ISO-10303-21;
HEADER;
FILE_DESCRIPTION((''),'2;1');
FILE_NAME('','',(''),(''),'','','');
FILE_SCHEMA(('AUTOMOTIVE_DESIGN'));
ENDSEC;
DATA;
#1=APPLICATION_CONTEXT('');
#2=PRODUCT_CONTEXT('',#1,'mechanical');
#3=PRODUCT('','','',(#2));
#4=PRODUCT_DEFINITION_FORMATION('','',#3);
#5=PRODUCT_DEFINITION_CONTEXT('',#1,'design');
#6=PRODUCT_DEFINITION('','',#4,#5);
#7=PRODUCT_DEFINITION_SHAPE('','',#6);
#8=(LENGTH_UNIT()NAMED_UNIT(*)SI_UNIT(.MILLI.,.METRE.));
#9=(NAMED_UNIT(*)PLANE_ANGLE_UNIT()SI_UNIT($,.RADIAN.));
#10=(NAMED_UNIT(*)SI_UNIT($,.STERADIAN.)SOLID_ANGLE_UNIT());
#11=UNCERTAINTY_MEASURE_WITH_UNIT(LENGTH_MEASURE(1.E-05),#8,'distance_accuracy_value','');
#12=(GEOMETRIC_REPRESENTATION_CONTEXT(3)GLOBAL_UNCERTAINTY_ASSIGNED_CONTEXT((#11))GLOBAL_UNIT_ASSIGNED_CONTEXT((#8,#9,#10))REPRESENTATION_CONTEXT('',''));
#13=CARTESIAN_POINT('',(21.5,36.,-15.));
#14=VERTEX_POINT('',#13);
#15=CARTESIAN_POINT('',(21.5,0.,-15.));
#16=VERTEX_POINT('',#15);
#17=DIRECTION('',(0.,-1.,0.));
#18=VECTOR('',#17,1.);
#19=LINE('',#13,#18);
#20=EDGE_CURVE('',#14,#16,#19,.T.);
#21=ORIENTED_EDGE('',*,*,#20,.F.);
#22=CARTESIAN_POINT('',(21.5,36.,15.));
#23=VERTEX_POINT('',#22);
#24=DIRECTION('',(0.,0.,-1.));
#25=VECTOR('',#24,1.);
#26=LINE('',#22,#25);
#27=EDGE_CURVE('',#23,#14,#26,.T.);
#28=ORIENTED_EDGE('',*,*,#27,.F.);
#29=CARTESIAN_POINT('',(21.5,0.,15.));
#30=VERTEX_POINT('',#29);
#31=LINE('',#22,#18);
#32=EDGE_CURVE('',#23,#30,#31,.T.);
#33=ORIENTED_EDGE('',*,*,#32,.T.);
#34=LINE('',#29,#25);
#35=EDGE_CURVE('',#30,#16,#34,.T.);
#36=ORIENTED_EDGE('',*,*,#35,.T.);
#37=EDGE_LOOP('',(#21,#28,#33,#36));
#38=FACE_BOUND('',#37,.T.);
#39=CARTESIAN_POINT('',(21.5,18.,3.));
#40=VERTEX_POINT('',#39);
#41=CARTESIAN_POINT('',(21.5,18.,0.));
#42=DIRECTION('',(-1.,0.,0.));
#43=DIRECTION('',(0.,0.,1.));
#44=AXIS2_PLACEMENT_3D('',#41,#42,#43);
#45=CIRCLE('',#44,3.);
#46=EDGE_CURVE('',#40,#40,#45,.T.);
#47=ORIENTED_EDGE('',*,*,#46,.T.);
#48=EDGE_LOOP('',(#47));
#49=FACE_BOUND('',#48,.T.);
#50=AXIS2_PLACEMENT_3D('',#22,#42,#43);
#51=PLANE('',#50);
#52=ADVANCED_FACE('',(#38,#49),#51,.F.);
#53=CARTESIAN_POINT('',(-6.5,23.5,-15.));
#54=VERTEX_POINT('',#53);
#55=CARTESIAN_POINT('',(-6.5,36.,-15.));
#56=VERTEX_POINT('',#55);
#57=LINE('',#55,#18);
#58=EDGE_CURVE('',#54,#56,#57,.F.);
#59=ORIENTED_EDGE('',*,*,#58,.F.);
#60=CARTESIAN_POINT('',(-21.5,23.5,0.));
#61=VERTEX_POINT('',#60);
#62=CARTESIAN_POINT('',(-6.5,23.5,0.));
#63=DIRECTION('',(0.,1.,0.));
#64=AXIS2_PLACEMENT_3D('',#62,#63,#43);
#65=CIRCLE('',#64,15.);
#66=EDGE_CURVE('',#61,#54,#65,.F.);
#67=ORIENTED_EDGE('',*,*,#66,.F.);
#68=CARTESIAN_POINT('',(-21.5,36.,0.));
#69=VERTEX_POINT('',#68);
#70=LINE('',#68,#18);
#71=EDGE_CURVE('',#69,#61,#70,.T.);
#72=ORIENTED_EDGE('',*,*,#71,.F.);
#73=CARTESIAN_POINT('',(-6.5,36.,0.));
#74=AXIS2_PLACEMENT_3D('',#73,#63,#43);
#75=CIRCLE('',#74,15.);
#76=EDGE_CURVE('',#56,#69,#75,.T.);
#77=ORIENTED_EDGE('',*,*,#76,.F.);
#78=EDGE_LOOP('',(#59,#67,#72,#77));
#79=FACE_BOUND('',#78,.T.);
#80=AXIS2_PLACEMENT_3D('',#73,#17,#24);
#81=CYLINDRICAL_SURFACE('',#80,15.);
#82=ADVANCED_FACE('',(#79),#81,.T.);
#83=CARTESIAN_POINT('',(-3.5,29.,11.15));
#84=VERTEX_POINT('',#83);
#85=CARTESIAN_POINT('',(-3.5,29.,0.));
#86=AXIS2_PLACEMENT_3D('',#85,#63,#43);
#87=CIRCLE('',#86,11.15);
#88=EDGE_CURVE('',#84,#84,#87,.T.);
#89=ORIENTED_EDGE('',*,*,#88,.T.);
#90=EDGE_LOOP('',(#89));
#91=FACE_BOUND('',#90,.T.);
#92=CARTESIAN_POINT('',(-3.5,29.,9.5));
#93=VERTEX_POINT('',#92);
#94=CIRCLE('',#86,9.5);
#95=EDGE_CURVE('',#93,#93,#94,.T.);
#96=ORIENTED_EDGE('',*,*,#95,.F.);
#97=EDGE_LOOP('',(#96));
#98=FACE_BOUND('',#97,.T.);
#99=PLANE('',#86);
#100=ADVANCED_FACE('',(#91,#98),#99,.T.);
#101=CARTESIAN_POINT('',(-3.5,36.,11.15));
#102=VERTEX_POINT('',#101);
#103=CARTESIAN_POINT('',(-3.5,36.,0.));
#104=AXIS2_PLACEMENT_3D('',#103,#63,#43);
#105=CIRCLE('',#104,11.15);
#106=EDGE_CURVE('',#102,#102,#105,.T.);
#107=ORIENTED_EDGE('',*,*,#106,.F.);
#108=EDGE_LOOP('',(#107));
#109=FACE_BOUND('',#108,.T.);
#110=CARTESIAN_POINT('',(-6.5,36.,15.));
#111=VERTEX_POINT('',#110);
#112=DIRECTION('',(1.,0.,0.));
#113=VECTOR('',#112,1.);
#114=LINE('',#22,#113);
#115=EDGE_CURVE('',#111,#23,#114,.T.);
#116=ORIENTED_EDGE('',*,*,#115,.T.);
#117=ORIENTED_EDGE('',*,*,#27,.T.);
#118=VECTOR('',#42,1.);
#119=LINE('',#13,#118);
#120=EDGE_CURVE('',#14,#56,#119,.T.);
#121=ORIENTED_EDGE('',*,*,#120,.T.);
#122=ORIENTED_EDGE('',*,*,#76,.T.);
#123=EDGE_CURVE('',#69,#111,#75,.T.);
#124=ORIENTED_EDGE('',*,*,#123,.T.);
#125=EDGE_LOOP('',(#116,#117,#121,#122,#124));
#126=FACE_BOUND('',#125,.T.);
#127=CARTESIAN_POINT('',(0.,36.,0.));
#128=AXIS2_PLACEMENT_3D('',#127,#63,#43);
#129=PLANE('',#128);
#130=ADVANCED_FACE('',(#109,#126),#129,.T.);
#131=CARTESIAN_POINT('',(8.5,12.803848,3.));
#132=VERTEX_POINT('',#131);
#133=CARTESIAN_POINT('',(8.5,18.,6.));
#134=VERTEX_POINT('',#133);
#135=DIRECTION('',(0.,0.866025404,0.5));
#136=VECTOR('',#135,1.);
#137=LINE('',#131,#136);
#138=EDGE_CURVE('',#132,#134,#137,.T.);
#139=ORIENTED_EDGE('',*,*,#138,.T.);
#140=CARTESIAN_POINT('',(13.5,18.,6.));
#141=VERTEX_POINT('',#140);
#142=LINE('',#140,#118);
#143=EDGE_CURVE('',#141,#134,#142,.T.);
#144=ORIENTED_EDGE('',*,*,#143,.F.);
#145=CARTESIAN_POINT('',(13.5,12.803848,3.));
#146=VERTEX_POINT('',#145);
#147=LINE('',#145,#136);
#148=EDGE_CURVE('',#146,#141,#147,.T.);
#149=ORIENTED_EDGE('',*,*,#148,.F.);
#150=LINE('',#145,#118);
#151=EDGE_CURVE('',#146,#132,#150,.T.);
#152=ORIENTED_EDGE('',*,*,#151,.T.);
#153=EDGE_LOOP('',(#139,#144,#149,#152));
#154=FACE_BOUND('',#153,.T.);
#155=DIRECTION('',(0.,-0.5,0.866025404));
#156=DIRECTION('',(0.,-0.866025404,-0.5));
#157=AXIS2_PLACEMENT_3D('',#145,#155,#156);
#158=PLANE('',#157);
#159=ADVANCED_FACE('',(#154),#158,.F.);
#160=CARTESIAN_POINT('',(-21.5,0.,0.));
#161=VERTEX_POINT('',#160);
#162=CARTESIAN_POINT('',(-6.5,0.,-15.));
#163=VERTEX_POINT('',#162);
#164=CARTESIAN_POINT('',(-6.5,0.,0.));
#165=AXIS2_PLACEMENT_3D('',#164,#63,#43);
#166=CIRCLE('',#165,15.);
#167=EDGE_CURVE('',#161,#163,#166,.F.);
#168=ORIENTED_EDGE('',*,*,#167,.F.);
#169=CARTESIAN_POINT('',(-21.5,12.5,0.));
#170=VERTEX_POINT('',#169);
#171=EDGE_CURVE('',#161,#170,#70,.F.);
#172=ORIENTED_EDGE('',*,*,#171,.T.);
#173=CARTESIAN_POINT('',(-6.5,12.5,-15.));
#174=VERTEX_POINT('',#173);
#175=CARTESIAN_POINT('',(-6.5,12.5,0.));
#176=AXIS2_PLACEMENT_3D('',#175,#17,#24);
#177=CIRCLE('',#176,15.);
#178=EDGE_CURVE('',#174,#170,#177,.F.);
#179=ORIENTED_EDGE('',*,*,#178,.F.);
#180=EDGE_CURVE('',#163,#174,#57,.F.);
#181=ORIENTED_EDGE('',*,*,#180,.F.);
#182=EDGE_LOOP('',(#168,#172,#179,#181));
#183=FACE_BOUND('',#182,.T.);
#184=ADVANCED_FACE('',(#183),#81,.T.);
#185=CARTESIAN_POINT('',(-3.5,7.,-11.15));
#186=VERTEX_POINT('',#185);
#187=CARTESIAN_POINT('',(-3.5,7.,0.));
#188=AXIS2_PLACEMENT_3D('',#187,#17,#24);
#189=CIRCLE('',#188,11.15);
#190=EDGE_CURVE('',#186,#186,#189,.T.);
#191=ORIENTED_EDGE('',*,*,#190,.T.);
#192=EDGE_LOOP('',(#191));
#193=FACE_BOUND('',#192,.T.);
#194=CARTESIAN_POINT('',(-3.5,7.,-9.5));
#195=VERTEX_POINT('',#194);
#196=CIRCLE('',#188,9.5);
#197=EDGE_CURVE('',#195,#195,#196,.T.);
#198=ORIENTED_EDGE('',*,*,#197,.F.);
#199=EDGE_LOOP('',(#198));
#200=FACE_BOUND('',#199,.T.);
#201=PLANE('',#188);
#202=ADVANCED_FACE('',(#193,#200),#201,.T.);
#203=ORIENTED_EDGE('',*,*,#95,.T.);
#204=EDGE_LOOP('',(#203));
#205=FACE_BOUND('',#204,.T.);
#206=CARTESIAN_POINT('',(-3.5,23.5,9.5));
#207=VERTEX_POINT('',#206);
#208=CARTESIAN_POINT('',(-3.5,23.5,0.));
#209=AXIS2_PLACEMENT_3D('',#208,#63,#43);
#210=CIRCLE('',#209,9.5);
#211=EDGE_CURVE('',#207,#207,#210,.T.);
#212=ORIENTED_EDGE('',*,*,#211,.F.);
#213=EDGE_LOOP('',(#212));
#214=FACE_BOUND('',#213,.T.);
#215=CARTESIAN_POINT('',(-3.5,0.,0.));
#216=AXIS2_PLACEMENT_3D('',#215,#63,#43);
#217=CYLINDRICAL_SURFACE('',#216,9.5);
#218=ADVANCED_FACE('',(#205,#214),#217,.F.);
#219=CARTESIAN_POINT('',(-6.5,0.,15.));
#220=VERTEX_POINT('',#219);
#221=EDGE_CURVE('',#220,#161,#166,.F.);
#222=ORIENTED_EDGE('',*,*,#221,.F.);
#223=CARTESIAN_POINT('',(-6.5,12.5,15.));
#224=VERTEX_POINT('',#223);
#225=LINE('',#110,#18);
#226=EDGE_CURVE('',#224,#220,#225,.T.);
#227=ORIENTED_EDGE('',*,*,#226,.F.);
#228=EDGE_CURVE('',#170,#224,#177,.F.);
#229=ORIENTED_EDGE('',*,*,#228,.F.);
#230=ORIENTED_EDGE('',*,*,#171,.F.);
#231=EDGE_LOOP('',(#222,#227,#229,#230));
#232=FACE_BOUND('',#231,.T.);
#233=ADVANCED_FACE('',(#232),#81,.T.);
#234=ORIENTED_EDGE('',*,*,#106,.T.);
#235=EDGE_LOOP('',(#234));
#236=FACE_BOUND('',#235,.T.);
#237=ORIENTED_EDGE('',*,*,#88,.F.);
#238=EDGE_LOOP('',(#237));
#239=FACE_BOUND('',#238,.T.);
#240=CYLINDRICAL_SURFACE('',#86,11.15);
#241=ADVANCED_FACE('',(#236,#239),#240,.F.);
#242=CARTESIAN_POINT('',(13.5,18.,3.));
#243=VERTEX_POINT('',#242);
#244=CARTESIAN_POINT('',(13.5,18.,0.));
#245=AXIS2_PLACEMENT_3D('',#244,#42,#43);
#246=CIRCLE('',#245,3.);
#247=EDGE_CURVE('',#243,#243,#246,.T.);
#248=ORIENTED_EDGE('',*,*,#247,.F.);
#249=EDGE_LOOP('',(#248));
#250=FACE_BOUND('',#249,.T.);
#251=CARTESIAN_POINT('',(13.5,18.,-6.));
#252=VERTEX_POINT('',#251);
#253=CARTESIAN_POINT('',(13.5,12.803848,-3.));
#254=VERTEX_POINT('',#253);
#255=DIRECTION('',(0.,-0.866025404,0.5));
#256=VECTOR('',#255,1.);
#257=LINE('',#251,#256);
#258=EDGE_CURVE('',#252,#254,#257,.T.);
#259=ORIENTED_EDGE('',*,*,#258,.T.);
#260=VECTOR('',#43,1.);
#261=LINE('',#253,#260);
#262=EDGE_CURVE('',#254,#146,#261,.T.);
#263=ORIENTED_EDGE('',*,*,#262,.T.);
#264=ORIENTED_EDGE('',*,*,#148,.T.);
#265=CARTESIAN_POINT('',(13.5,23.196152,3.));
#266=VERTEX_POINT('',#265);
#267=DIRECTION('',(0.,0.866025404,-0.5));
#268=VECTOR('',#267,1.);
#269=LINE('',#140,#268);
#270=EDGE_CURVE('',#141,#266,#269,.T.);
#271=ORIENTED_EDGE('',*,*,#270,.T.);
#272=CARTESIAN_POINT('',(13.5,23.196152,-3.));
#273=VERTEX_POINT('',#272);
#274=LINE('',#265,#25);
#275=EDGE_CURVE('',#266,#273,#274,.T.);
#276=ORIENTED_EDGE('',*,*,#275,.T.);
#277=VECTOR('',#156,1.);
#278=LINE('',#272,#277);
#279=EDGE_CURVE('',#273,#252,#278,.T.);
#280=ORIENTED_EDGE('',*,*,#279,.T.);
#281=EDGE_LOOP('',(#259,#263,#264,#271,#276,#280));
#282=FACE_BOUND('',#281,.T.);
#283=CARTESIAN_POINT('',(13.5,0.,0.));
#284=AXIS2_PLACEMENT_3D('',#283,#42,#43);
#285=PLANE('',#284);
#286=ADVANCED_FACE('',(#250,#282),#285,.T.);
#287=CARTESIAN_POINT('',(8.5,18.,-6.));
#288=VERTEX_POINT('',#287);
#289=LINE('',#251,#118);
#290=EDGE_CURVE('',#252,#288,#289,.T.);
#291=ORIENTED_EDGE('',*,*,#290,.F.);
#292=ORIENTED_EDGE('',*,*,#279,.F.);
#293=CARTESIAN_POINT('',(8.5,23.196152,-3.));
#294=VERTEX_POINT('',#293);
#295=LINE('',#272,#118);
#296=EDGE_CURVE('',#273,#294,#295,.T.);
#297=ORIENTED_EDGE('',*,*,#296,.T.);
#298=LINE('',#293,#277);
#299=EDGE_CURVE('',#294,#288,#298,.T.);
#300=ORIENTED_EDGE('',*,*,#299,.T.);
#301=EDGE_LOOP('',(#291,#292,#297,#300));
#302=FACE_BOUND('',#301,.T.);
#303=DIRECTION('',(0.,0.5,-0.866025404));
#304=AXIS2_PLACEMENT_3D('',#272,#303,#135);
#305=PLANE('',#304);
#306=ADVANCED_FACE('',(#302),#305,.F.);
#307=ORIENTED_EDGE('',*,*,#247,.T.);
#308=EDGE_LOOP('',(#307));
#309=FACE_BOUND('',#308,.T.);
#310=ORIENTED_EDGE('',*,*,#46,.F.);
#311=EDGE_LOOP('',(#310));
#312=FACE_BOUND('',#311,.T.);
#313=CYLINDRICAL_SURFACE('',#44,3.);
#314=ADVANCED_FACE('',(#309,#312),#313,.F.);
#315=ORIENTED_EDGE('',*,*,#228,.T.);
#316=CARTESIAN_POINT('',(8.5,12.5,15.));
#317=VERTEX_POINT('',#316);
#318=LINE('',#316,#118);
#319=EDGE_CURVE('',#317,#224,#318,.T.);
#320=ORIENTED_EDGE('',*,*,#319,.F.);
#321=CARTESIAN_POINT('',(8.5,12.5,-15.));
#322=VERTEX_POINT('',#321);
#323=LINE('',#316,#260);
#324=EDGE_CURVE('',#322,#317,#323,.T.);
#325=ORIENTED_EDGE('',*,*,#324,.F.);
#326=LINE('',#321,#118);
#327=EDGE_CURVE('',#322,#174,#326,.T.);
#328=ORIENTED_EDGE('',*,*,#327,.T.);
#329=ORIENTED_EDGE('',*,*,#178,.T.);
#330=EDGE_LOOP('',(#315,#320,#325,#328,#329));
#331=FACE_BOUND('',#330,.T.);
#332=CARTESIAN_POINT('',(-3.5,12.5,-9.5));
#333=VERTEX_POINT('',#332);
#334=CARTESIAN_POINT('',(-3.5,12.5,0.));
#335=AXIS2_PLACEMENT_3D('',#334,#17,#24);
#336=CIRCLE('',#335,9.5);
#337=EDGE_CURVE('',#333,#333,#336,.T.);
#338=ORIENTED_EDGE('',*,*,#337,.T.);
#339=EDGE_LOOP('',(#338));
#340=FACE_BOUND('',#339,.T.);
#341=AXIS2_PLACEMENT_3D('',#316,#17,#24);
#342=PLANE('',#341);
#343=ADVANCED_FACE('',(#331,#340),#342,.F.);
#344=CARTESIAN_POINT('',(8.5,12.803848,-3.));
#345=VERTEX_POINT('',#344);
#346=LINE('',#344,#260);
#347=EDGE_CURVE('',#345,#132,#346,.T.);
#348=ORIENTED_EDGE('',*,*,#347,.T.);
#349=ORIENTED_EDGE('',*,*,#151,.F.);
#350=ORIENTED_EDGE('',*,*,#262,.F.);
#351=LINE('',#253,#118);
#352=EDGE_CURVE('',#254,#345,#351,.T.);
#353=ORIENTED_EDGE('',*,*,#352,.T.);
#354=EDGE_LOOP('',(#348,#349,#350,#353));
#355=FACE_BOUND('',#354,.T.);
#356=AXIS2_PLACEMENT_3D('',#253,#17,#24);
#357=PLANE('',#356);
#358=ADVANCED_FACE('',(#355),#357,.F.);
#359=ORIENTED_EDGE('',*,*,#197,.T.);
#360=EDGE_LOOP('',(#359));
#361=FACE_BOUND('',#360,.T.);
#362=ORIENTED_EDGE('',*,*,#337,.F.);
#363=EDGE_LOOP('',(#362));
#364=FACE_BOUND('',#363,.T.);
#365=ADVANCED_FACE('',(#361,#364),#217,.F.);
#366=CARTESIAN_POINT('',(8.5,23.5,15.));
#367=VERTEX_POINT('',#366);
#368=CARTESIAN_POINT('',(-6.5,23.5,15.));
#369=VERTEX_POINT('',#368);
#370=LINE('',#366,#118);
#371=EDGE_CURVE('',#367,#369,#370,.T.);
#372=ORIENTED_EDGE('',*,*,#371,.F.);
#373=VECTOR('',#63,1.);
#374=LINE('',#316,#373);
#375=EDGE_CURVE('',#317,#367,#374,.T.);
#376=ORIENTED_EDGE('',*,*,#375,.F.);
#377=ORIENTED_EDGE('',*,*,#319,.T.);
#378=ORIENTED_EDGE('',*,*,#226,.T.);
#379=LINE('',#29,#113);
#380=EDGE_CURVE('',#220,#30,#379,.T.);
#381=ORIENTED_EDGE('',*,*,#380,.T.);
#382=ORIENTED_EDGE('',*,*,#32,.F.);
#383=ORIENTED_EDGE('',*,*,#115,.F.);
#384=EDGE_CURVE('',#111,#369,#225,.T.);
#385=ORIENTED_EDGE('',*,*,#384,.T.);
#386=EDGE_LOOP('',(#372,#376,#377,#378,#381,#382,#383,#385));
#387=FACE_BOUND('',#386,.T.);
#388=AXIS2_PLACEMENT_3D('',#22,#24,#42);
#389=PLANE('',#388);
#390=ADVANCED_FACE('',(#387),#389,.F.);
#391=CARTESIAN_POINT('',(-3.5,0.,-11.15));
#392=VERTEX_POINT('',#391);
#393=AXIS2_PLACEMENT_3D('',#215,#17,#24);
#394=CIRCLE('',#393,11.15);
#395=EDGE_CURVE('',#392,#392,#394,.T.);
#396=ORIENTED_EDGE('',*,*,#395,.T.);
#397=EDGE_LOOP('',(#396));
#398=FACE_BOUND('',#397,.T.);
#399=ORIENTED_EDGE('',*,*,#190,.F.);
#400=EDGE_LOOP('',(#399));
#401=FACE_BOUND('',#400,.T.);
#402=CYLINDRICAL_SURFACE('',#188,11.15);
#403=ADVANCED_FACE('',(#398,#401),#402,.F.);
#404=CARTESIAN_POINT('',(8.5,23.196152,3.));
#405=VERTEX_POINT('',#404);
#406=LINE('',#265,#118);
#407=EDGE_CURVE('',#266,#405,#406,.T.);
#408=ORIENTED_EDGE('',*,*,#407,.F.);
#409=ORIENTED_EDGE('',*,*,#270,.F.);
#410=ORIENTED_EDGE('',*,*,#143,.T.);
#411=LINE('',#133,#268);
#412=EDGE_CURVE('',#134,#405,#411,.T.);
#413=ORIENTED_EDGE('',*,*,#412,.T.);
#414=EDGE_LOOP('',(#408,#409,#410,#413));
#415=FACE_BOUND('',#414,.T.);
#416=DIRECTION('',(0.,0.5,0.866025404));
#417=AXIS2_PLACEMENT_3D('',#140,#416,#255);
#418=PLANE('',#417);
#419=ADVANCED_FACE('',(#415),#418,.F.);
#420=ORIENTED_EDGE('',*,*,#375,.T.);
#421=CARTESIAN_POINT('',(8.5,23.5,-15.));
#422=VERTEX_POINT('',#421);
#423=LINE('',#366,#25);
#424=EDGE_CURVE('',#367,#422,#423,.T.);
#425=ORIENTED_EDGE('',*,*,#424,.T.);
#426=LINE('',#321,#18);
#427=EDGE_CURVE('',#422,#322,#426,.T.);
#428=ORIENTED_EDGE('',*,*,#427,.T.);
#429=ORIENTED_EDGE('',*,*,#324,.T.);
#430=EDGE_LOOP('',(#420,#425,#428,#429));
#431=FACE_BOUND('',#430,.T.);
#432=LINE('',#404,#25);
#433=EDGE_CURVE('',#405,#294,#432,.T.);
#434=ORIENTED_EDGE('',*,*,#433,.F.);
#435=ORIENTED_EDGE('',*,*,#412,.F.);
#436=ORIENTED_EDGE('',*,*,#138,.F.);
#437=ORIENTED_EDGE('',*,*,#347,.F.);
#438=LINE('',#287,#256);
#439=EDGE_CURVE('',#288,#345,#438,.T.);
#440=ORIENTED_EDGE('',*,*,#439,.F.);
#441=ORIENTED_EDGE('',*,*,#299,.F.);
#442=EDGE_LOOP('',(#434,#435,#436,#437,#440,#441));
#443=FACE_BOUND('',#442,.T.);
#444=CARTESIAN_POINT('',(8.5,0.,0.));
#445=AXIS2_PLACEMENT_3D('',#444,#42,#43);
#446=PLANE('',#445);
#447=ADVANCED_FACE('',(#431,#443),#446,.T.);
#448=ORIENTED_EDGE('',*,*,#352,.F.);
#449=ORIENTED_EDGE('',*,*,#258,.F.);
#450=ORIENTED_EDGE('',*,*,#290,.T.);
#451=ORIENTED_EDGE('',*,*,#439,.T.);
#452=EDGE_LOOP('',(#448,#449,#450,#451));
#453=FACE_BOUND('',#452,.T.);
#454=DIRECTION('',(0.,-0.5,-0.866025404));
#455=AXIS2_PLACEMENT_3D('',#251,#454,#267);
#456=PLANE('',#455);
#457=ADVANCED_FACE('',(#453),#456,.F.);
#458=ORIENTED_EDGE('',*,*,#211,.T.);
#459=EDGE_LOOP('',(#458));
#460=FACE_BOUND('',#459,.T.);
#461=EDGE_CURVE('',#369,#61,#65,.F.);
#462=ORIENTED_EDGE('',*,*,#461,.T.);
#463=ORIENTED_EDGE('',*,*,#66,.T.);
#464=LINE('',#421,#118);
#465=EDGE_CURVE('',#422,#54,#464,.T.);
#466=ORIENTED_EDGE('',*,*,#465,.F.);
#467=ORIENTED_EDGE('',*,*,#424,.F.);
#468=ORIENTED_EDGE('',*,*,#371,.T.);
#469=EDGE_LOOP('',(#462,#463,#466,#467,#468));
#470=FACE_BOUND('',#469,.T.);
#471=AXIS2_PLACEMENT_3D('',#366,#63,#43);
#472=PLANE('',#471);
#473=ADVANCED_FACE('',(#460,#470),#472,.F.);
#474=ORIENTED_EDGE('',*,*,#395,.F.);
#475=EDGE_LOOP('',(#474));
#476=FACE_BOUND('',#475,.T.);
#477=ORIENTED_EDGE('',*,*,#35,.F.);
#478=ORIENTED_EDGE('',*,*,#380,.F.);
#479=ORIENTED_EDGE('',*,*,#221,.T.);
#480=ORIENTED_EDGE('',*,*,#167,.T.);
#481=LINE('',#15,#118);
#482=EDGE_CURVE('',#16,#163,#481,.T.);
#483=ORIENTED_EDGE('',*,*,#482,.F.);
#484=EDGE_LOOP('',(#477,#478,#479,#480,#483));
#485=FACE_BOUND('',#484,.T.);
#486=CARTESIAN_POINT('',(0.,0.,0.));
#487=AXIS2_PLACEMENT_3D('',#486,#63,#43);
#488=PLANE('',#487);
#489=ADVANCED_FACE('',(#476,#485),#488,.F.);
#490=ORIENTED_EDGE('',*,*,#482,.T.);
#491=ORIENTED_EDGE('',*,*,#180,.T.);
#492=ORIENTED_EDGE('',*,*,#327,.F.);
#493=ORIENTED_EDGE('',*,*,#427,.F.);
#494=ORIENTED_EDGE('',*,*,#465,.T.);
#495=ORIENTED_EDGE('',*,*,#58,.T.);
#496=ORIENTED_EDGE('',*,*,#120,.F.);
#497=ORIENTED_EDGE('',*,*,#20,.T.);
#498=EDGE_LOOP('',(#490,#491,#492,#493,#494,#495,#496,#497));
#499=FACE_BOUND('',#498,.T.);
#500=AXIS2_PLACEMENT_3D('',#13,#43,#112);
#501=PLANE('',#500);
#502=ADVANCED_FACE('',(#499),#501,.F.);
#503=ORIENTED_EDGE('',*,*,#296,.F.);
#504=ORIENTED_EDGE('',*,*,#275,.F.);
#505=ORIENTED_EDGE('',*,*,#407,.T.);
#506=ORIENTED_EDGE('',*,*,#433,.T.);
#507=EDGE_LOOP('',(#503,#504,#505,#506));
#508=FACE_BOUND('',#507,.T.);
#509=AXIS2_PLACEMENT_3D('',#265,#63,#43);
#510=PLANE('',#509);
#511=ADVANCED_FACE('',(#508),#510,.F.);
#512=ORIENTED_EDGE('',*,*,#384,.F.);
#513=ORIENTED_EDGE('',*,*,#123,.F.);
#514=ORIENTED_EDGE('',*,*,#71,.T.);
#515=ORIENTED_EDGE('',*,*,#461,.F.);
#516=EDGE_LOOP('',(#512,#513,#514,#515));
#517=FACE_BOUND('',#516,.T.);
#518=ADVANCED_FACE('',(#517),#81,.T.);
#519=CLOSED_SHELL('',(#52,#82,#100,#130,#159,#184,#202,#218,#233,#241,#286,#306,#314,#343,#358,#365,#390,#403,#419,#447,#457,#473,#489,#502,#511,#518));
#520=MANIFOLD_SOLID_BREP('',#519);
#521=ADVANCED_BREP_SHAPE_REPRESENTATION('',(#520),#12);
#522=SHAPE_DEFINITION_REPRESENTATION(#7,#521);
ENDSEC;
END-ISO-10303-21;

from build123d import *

# Parameters (mm, degrees)
SKETCH1_W           = 43
SKETCH1_H           = 30
BOSS_EXTRUDE1_DEPTH = 36
SKETCH2_W           = 30
SKETCH2_H           = 11
CUT_EXTRUDE1_DEPTH  = 30
SKETCH3_R           = 11.15
CUT_EXTRUDE2_DEPTH  = 7
CUT_EXTRUDE3_START  = -7
SKETCH4_R           = 11.15
CUT_EXTRUDE3_DEPTH  = 7
SKETCH5_R           = 9.5
CUT_EXTRUDE4_DEPTH  = 40.092838219
CUT_EXTRUDE5_DEPTH  = 5
SKETCH7_R           = 3
CUT_EXTRUDE6_DEPTH  = 53.402290026
FILLET2_R           = 15


with BuildPart() as part:
    # Sketch1 → Boss-Extrude1 (new body)
    with BuildSketch(Plane(origin=(0, 0, 0), x_dir=(1, 0, 0), z_dir=(0, 1, 0))):
        Rectangle(SKETCH1_W, SKETCH1_H)
    extrude(amount=BOSS_EXTRUDE1_DEPTH)

    # Sketch2 → Cut-Extrude1 (cut)
    with BuildSketch(Plane.ZY.offset(21.5)):
        with Locations((0, 18)):
            Rectangle(SKETCH2_W, SKETCH2_H)
    extrude(amount=-CUT_EXTRUDE1_DEPTH, mode=Mode.SUBTRACT)

    # Sketch3 → Cut-Extrude2 (cut)
    with BuildSketch(Plane(origin=(0, 36, 0), x_dir=(1, 0, 0), z_dir=(0, 1, 0))):
        with Locations(Location((-3.5, 0, 0), (0, 0, 270))):
            Circle(SKETCH3_R)
    extrude(amount=-CUT_EXTRUDE2_DEPTH, mode=Mode.SUBTRACT)

    # Sketch4 → Cut-Extrude3 (cut)
    with BuildSketch(Plane.XZ.offset(CUT_EXTRUDE3_START)):
        with Locations(Location((-3.5, 0, 0), (0, 0, 90))):
            Circle(SKETCH4_R)
    extrude(amount=CUT_EXTRUDE3_DEPTH, mode=Mode.SUBTRACT)

    # Sketch5 → Cut-Extrude4 (cut, through all)
    with BuildSketch(Plane(origin=(0, 29, 0), x_dir=(1, 0, 0), z_dir=(0, 1, 0))):
        with Locations(Location((-3.5, 0, 0), (0, 0, 90))):
            Circle(SKETCH5_R)
    extrude(amount=-CUT_EXTRUDE4_DEPTH, mode=Mode.SUBTRACT)

    # Sketch6 → Cut-Extrude5 (cut)
    with BuildSketch(Plane.ZY.offset(-8.5)):
        Polygon((-3, 23.196152423), (-6, 18), (-3, 12.803847577), (3, 12.803847577), (6, 18), (3, 23.196152423), align=None)
    extrude(amount=-CUT_EXTRUDE5_DEPTH, mode=Mode.SUBTRACT)

    # Sketch7 → Cut-Extrude6 (cut, through all)
    with BuildSketch(Plane.ZY.offset(-13.5)):
        with Locations((0, 18)):
            Circle(SKETCH7_R)
    extrude(amount=-CUT_EXTRUDE6_DEPTH, mode=Mode.SUBTRACT)

    # Fillet2
    fillet2_edges = [part.edges().sort_by_distance(p)[0] for p in [
        (-21.5, 6.25, -15),
        (-21.5, 6.25, 15),
        (-21.5, 29.75, 15),
        (-21.5, 29.75, -15),
    ]]
    fillet(fillet2_edges, radius=FILLET2_R - 0.0001)  # a hair under: the kernel refuses the full size


solid = part.part
